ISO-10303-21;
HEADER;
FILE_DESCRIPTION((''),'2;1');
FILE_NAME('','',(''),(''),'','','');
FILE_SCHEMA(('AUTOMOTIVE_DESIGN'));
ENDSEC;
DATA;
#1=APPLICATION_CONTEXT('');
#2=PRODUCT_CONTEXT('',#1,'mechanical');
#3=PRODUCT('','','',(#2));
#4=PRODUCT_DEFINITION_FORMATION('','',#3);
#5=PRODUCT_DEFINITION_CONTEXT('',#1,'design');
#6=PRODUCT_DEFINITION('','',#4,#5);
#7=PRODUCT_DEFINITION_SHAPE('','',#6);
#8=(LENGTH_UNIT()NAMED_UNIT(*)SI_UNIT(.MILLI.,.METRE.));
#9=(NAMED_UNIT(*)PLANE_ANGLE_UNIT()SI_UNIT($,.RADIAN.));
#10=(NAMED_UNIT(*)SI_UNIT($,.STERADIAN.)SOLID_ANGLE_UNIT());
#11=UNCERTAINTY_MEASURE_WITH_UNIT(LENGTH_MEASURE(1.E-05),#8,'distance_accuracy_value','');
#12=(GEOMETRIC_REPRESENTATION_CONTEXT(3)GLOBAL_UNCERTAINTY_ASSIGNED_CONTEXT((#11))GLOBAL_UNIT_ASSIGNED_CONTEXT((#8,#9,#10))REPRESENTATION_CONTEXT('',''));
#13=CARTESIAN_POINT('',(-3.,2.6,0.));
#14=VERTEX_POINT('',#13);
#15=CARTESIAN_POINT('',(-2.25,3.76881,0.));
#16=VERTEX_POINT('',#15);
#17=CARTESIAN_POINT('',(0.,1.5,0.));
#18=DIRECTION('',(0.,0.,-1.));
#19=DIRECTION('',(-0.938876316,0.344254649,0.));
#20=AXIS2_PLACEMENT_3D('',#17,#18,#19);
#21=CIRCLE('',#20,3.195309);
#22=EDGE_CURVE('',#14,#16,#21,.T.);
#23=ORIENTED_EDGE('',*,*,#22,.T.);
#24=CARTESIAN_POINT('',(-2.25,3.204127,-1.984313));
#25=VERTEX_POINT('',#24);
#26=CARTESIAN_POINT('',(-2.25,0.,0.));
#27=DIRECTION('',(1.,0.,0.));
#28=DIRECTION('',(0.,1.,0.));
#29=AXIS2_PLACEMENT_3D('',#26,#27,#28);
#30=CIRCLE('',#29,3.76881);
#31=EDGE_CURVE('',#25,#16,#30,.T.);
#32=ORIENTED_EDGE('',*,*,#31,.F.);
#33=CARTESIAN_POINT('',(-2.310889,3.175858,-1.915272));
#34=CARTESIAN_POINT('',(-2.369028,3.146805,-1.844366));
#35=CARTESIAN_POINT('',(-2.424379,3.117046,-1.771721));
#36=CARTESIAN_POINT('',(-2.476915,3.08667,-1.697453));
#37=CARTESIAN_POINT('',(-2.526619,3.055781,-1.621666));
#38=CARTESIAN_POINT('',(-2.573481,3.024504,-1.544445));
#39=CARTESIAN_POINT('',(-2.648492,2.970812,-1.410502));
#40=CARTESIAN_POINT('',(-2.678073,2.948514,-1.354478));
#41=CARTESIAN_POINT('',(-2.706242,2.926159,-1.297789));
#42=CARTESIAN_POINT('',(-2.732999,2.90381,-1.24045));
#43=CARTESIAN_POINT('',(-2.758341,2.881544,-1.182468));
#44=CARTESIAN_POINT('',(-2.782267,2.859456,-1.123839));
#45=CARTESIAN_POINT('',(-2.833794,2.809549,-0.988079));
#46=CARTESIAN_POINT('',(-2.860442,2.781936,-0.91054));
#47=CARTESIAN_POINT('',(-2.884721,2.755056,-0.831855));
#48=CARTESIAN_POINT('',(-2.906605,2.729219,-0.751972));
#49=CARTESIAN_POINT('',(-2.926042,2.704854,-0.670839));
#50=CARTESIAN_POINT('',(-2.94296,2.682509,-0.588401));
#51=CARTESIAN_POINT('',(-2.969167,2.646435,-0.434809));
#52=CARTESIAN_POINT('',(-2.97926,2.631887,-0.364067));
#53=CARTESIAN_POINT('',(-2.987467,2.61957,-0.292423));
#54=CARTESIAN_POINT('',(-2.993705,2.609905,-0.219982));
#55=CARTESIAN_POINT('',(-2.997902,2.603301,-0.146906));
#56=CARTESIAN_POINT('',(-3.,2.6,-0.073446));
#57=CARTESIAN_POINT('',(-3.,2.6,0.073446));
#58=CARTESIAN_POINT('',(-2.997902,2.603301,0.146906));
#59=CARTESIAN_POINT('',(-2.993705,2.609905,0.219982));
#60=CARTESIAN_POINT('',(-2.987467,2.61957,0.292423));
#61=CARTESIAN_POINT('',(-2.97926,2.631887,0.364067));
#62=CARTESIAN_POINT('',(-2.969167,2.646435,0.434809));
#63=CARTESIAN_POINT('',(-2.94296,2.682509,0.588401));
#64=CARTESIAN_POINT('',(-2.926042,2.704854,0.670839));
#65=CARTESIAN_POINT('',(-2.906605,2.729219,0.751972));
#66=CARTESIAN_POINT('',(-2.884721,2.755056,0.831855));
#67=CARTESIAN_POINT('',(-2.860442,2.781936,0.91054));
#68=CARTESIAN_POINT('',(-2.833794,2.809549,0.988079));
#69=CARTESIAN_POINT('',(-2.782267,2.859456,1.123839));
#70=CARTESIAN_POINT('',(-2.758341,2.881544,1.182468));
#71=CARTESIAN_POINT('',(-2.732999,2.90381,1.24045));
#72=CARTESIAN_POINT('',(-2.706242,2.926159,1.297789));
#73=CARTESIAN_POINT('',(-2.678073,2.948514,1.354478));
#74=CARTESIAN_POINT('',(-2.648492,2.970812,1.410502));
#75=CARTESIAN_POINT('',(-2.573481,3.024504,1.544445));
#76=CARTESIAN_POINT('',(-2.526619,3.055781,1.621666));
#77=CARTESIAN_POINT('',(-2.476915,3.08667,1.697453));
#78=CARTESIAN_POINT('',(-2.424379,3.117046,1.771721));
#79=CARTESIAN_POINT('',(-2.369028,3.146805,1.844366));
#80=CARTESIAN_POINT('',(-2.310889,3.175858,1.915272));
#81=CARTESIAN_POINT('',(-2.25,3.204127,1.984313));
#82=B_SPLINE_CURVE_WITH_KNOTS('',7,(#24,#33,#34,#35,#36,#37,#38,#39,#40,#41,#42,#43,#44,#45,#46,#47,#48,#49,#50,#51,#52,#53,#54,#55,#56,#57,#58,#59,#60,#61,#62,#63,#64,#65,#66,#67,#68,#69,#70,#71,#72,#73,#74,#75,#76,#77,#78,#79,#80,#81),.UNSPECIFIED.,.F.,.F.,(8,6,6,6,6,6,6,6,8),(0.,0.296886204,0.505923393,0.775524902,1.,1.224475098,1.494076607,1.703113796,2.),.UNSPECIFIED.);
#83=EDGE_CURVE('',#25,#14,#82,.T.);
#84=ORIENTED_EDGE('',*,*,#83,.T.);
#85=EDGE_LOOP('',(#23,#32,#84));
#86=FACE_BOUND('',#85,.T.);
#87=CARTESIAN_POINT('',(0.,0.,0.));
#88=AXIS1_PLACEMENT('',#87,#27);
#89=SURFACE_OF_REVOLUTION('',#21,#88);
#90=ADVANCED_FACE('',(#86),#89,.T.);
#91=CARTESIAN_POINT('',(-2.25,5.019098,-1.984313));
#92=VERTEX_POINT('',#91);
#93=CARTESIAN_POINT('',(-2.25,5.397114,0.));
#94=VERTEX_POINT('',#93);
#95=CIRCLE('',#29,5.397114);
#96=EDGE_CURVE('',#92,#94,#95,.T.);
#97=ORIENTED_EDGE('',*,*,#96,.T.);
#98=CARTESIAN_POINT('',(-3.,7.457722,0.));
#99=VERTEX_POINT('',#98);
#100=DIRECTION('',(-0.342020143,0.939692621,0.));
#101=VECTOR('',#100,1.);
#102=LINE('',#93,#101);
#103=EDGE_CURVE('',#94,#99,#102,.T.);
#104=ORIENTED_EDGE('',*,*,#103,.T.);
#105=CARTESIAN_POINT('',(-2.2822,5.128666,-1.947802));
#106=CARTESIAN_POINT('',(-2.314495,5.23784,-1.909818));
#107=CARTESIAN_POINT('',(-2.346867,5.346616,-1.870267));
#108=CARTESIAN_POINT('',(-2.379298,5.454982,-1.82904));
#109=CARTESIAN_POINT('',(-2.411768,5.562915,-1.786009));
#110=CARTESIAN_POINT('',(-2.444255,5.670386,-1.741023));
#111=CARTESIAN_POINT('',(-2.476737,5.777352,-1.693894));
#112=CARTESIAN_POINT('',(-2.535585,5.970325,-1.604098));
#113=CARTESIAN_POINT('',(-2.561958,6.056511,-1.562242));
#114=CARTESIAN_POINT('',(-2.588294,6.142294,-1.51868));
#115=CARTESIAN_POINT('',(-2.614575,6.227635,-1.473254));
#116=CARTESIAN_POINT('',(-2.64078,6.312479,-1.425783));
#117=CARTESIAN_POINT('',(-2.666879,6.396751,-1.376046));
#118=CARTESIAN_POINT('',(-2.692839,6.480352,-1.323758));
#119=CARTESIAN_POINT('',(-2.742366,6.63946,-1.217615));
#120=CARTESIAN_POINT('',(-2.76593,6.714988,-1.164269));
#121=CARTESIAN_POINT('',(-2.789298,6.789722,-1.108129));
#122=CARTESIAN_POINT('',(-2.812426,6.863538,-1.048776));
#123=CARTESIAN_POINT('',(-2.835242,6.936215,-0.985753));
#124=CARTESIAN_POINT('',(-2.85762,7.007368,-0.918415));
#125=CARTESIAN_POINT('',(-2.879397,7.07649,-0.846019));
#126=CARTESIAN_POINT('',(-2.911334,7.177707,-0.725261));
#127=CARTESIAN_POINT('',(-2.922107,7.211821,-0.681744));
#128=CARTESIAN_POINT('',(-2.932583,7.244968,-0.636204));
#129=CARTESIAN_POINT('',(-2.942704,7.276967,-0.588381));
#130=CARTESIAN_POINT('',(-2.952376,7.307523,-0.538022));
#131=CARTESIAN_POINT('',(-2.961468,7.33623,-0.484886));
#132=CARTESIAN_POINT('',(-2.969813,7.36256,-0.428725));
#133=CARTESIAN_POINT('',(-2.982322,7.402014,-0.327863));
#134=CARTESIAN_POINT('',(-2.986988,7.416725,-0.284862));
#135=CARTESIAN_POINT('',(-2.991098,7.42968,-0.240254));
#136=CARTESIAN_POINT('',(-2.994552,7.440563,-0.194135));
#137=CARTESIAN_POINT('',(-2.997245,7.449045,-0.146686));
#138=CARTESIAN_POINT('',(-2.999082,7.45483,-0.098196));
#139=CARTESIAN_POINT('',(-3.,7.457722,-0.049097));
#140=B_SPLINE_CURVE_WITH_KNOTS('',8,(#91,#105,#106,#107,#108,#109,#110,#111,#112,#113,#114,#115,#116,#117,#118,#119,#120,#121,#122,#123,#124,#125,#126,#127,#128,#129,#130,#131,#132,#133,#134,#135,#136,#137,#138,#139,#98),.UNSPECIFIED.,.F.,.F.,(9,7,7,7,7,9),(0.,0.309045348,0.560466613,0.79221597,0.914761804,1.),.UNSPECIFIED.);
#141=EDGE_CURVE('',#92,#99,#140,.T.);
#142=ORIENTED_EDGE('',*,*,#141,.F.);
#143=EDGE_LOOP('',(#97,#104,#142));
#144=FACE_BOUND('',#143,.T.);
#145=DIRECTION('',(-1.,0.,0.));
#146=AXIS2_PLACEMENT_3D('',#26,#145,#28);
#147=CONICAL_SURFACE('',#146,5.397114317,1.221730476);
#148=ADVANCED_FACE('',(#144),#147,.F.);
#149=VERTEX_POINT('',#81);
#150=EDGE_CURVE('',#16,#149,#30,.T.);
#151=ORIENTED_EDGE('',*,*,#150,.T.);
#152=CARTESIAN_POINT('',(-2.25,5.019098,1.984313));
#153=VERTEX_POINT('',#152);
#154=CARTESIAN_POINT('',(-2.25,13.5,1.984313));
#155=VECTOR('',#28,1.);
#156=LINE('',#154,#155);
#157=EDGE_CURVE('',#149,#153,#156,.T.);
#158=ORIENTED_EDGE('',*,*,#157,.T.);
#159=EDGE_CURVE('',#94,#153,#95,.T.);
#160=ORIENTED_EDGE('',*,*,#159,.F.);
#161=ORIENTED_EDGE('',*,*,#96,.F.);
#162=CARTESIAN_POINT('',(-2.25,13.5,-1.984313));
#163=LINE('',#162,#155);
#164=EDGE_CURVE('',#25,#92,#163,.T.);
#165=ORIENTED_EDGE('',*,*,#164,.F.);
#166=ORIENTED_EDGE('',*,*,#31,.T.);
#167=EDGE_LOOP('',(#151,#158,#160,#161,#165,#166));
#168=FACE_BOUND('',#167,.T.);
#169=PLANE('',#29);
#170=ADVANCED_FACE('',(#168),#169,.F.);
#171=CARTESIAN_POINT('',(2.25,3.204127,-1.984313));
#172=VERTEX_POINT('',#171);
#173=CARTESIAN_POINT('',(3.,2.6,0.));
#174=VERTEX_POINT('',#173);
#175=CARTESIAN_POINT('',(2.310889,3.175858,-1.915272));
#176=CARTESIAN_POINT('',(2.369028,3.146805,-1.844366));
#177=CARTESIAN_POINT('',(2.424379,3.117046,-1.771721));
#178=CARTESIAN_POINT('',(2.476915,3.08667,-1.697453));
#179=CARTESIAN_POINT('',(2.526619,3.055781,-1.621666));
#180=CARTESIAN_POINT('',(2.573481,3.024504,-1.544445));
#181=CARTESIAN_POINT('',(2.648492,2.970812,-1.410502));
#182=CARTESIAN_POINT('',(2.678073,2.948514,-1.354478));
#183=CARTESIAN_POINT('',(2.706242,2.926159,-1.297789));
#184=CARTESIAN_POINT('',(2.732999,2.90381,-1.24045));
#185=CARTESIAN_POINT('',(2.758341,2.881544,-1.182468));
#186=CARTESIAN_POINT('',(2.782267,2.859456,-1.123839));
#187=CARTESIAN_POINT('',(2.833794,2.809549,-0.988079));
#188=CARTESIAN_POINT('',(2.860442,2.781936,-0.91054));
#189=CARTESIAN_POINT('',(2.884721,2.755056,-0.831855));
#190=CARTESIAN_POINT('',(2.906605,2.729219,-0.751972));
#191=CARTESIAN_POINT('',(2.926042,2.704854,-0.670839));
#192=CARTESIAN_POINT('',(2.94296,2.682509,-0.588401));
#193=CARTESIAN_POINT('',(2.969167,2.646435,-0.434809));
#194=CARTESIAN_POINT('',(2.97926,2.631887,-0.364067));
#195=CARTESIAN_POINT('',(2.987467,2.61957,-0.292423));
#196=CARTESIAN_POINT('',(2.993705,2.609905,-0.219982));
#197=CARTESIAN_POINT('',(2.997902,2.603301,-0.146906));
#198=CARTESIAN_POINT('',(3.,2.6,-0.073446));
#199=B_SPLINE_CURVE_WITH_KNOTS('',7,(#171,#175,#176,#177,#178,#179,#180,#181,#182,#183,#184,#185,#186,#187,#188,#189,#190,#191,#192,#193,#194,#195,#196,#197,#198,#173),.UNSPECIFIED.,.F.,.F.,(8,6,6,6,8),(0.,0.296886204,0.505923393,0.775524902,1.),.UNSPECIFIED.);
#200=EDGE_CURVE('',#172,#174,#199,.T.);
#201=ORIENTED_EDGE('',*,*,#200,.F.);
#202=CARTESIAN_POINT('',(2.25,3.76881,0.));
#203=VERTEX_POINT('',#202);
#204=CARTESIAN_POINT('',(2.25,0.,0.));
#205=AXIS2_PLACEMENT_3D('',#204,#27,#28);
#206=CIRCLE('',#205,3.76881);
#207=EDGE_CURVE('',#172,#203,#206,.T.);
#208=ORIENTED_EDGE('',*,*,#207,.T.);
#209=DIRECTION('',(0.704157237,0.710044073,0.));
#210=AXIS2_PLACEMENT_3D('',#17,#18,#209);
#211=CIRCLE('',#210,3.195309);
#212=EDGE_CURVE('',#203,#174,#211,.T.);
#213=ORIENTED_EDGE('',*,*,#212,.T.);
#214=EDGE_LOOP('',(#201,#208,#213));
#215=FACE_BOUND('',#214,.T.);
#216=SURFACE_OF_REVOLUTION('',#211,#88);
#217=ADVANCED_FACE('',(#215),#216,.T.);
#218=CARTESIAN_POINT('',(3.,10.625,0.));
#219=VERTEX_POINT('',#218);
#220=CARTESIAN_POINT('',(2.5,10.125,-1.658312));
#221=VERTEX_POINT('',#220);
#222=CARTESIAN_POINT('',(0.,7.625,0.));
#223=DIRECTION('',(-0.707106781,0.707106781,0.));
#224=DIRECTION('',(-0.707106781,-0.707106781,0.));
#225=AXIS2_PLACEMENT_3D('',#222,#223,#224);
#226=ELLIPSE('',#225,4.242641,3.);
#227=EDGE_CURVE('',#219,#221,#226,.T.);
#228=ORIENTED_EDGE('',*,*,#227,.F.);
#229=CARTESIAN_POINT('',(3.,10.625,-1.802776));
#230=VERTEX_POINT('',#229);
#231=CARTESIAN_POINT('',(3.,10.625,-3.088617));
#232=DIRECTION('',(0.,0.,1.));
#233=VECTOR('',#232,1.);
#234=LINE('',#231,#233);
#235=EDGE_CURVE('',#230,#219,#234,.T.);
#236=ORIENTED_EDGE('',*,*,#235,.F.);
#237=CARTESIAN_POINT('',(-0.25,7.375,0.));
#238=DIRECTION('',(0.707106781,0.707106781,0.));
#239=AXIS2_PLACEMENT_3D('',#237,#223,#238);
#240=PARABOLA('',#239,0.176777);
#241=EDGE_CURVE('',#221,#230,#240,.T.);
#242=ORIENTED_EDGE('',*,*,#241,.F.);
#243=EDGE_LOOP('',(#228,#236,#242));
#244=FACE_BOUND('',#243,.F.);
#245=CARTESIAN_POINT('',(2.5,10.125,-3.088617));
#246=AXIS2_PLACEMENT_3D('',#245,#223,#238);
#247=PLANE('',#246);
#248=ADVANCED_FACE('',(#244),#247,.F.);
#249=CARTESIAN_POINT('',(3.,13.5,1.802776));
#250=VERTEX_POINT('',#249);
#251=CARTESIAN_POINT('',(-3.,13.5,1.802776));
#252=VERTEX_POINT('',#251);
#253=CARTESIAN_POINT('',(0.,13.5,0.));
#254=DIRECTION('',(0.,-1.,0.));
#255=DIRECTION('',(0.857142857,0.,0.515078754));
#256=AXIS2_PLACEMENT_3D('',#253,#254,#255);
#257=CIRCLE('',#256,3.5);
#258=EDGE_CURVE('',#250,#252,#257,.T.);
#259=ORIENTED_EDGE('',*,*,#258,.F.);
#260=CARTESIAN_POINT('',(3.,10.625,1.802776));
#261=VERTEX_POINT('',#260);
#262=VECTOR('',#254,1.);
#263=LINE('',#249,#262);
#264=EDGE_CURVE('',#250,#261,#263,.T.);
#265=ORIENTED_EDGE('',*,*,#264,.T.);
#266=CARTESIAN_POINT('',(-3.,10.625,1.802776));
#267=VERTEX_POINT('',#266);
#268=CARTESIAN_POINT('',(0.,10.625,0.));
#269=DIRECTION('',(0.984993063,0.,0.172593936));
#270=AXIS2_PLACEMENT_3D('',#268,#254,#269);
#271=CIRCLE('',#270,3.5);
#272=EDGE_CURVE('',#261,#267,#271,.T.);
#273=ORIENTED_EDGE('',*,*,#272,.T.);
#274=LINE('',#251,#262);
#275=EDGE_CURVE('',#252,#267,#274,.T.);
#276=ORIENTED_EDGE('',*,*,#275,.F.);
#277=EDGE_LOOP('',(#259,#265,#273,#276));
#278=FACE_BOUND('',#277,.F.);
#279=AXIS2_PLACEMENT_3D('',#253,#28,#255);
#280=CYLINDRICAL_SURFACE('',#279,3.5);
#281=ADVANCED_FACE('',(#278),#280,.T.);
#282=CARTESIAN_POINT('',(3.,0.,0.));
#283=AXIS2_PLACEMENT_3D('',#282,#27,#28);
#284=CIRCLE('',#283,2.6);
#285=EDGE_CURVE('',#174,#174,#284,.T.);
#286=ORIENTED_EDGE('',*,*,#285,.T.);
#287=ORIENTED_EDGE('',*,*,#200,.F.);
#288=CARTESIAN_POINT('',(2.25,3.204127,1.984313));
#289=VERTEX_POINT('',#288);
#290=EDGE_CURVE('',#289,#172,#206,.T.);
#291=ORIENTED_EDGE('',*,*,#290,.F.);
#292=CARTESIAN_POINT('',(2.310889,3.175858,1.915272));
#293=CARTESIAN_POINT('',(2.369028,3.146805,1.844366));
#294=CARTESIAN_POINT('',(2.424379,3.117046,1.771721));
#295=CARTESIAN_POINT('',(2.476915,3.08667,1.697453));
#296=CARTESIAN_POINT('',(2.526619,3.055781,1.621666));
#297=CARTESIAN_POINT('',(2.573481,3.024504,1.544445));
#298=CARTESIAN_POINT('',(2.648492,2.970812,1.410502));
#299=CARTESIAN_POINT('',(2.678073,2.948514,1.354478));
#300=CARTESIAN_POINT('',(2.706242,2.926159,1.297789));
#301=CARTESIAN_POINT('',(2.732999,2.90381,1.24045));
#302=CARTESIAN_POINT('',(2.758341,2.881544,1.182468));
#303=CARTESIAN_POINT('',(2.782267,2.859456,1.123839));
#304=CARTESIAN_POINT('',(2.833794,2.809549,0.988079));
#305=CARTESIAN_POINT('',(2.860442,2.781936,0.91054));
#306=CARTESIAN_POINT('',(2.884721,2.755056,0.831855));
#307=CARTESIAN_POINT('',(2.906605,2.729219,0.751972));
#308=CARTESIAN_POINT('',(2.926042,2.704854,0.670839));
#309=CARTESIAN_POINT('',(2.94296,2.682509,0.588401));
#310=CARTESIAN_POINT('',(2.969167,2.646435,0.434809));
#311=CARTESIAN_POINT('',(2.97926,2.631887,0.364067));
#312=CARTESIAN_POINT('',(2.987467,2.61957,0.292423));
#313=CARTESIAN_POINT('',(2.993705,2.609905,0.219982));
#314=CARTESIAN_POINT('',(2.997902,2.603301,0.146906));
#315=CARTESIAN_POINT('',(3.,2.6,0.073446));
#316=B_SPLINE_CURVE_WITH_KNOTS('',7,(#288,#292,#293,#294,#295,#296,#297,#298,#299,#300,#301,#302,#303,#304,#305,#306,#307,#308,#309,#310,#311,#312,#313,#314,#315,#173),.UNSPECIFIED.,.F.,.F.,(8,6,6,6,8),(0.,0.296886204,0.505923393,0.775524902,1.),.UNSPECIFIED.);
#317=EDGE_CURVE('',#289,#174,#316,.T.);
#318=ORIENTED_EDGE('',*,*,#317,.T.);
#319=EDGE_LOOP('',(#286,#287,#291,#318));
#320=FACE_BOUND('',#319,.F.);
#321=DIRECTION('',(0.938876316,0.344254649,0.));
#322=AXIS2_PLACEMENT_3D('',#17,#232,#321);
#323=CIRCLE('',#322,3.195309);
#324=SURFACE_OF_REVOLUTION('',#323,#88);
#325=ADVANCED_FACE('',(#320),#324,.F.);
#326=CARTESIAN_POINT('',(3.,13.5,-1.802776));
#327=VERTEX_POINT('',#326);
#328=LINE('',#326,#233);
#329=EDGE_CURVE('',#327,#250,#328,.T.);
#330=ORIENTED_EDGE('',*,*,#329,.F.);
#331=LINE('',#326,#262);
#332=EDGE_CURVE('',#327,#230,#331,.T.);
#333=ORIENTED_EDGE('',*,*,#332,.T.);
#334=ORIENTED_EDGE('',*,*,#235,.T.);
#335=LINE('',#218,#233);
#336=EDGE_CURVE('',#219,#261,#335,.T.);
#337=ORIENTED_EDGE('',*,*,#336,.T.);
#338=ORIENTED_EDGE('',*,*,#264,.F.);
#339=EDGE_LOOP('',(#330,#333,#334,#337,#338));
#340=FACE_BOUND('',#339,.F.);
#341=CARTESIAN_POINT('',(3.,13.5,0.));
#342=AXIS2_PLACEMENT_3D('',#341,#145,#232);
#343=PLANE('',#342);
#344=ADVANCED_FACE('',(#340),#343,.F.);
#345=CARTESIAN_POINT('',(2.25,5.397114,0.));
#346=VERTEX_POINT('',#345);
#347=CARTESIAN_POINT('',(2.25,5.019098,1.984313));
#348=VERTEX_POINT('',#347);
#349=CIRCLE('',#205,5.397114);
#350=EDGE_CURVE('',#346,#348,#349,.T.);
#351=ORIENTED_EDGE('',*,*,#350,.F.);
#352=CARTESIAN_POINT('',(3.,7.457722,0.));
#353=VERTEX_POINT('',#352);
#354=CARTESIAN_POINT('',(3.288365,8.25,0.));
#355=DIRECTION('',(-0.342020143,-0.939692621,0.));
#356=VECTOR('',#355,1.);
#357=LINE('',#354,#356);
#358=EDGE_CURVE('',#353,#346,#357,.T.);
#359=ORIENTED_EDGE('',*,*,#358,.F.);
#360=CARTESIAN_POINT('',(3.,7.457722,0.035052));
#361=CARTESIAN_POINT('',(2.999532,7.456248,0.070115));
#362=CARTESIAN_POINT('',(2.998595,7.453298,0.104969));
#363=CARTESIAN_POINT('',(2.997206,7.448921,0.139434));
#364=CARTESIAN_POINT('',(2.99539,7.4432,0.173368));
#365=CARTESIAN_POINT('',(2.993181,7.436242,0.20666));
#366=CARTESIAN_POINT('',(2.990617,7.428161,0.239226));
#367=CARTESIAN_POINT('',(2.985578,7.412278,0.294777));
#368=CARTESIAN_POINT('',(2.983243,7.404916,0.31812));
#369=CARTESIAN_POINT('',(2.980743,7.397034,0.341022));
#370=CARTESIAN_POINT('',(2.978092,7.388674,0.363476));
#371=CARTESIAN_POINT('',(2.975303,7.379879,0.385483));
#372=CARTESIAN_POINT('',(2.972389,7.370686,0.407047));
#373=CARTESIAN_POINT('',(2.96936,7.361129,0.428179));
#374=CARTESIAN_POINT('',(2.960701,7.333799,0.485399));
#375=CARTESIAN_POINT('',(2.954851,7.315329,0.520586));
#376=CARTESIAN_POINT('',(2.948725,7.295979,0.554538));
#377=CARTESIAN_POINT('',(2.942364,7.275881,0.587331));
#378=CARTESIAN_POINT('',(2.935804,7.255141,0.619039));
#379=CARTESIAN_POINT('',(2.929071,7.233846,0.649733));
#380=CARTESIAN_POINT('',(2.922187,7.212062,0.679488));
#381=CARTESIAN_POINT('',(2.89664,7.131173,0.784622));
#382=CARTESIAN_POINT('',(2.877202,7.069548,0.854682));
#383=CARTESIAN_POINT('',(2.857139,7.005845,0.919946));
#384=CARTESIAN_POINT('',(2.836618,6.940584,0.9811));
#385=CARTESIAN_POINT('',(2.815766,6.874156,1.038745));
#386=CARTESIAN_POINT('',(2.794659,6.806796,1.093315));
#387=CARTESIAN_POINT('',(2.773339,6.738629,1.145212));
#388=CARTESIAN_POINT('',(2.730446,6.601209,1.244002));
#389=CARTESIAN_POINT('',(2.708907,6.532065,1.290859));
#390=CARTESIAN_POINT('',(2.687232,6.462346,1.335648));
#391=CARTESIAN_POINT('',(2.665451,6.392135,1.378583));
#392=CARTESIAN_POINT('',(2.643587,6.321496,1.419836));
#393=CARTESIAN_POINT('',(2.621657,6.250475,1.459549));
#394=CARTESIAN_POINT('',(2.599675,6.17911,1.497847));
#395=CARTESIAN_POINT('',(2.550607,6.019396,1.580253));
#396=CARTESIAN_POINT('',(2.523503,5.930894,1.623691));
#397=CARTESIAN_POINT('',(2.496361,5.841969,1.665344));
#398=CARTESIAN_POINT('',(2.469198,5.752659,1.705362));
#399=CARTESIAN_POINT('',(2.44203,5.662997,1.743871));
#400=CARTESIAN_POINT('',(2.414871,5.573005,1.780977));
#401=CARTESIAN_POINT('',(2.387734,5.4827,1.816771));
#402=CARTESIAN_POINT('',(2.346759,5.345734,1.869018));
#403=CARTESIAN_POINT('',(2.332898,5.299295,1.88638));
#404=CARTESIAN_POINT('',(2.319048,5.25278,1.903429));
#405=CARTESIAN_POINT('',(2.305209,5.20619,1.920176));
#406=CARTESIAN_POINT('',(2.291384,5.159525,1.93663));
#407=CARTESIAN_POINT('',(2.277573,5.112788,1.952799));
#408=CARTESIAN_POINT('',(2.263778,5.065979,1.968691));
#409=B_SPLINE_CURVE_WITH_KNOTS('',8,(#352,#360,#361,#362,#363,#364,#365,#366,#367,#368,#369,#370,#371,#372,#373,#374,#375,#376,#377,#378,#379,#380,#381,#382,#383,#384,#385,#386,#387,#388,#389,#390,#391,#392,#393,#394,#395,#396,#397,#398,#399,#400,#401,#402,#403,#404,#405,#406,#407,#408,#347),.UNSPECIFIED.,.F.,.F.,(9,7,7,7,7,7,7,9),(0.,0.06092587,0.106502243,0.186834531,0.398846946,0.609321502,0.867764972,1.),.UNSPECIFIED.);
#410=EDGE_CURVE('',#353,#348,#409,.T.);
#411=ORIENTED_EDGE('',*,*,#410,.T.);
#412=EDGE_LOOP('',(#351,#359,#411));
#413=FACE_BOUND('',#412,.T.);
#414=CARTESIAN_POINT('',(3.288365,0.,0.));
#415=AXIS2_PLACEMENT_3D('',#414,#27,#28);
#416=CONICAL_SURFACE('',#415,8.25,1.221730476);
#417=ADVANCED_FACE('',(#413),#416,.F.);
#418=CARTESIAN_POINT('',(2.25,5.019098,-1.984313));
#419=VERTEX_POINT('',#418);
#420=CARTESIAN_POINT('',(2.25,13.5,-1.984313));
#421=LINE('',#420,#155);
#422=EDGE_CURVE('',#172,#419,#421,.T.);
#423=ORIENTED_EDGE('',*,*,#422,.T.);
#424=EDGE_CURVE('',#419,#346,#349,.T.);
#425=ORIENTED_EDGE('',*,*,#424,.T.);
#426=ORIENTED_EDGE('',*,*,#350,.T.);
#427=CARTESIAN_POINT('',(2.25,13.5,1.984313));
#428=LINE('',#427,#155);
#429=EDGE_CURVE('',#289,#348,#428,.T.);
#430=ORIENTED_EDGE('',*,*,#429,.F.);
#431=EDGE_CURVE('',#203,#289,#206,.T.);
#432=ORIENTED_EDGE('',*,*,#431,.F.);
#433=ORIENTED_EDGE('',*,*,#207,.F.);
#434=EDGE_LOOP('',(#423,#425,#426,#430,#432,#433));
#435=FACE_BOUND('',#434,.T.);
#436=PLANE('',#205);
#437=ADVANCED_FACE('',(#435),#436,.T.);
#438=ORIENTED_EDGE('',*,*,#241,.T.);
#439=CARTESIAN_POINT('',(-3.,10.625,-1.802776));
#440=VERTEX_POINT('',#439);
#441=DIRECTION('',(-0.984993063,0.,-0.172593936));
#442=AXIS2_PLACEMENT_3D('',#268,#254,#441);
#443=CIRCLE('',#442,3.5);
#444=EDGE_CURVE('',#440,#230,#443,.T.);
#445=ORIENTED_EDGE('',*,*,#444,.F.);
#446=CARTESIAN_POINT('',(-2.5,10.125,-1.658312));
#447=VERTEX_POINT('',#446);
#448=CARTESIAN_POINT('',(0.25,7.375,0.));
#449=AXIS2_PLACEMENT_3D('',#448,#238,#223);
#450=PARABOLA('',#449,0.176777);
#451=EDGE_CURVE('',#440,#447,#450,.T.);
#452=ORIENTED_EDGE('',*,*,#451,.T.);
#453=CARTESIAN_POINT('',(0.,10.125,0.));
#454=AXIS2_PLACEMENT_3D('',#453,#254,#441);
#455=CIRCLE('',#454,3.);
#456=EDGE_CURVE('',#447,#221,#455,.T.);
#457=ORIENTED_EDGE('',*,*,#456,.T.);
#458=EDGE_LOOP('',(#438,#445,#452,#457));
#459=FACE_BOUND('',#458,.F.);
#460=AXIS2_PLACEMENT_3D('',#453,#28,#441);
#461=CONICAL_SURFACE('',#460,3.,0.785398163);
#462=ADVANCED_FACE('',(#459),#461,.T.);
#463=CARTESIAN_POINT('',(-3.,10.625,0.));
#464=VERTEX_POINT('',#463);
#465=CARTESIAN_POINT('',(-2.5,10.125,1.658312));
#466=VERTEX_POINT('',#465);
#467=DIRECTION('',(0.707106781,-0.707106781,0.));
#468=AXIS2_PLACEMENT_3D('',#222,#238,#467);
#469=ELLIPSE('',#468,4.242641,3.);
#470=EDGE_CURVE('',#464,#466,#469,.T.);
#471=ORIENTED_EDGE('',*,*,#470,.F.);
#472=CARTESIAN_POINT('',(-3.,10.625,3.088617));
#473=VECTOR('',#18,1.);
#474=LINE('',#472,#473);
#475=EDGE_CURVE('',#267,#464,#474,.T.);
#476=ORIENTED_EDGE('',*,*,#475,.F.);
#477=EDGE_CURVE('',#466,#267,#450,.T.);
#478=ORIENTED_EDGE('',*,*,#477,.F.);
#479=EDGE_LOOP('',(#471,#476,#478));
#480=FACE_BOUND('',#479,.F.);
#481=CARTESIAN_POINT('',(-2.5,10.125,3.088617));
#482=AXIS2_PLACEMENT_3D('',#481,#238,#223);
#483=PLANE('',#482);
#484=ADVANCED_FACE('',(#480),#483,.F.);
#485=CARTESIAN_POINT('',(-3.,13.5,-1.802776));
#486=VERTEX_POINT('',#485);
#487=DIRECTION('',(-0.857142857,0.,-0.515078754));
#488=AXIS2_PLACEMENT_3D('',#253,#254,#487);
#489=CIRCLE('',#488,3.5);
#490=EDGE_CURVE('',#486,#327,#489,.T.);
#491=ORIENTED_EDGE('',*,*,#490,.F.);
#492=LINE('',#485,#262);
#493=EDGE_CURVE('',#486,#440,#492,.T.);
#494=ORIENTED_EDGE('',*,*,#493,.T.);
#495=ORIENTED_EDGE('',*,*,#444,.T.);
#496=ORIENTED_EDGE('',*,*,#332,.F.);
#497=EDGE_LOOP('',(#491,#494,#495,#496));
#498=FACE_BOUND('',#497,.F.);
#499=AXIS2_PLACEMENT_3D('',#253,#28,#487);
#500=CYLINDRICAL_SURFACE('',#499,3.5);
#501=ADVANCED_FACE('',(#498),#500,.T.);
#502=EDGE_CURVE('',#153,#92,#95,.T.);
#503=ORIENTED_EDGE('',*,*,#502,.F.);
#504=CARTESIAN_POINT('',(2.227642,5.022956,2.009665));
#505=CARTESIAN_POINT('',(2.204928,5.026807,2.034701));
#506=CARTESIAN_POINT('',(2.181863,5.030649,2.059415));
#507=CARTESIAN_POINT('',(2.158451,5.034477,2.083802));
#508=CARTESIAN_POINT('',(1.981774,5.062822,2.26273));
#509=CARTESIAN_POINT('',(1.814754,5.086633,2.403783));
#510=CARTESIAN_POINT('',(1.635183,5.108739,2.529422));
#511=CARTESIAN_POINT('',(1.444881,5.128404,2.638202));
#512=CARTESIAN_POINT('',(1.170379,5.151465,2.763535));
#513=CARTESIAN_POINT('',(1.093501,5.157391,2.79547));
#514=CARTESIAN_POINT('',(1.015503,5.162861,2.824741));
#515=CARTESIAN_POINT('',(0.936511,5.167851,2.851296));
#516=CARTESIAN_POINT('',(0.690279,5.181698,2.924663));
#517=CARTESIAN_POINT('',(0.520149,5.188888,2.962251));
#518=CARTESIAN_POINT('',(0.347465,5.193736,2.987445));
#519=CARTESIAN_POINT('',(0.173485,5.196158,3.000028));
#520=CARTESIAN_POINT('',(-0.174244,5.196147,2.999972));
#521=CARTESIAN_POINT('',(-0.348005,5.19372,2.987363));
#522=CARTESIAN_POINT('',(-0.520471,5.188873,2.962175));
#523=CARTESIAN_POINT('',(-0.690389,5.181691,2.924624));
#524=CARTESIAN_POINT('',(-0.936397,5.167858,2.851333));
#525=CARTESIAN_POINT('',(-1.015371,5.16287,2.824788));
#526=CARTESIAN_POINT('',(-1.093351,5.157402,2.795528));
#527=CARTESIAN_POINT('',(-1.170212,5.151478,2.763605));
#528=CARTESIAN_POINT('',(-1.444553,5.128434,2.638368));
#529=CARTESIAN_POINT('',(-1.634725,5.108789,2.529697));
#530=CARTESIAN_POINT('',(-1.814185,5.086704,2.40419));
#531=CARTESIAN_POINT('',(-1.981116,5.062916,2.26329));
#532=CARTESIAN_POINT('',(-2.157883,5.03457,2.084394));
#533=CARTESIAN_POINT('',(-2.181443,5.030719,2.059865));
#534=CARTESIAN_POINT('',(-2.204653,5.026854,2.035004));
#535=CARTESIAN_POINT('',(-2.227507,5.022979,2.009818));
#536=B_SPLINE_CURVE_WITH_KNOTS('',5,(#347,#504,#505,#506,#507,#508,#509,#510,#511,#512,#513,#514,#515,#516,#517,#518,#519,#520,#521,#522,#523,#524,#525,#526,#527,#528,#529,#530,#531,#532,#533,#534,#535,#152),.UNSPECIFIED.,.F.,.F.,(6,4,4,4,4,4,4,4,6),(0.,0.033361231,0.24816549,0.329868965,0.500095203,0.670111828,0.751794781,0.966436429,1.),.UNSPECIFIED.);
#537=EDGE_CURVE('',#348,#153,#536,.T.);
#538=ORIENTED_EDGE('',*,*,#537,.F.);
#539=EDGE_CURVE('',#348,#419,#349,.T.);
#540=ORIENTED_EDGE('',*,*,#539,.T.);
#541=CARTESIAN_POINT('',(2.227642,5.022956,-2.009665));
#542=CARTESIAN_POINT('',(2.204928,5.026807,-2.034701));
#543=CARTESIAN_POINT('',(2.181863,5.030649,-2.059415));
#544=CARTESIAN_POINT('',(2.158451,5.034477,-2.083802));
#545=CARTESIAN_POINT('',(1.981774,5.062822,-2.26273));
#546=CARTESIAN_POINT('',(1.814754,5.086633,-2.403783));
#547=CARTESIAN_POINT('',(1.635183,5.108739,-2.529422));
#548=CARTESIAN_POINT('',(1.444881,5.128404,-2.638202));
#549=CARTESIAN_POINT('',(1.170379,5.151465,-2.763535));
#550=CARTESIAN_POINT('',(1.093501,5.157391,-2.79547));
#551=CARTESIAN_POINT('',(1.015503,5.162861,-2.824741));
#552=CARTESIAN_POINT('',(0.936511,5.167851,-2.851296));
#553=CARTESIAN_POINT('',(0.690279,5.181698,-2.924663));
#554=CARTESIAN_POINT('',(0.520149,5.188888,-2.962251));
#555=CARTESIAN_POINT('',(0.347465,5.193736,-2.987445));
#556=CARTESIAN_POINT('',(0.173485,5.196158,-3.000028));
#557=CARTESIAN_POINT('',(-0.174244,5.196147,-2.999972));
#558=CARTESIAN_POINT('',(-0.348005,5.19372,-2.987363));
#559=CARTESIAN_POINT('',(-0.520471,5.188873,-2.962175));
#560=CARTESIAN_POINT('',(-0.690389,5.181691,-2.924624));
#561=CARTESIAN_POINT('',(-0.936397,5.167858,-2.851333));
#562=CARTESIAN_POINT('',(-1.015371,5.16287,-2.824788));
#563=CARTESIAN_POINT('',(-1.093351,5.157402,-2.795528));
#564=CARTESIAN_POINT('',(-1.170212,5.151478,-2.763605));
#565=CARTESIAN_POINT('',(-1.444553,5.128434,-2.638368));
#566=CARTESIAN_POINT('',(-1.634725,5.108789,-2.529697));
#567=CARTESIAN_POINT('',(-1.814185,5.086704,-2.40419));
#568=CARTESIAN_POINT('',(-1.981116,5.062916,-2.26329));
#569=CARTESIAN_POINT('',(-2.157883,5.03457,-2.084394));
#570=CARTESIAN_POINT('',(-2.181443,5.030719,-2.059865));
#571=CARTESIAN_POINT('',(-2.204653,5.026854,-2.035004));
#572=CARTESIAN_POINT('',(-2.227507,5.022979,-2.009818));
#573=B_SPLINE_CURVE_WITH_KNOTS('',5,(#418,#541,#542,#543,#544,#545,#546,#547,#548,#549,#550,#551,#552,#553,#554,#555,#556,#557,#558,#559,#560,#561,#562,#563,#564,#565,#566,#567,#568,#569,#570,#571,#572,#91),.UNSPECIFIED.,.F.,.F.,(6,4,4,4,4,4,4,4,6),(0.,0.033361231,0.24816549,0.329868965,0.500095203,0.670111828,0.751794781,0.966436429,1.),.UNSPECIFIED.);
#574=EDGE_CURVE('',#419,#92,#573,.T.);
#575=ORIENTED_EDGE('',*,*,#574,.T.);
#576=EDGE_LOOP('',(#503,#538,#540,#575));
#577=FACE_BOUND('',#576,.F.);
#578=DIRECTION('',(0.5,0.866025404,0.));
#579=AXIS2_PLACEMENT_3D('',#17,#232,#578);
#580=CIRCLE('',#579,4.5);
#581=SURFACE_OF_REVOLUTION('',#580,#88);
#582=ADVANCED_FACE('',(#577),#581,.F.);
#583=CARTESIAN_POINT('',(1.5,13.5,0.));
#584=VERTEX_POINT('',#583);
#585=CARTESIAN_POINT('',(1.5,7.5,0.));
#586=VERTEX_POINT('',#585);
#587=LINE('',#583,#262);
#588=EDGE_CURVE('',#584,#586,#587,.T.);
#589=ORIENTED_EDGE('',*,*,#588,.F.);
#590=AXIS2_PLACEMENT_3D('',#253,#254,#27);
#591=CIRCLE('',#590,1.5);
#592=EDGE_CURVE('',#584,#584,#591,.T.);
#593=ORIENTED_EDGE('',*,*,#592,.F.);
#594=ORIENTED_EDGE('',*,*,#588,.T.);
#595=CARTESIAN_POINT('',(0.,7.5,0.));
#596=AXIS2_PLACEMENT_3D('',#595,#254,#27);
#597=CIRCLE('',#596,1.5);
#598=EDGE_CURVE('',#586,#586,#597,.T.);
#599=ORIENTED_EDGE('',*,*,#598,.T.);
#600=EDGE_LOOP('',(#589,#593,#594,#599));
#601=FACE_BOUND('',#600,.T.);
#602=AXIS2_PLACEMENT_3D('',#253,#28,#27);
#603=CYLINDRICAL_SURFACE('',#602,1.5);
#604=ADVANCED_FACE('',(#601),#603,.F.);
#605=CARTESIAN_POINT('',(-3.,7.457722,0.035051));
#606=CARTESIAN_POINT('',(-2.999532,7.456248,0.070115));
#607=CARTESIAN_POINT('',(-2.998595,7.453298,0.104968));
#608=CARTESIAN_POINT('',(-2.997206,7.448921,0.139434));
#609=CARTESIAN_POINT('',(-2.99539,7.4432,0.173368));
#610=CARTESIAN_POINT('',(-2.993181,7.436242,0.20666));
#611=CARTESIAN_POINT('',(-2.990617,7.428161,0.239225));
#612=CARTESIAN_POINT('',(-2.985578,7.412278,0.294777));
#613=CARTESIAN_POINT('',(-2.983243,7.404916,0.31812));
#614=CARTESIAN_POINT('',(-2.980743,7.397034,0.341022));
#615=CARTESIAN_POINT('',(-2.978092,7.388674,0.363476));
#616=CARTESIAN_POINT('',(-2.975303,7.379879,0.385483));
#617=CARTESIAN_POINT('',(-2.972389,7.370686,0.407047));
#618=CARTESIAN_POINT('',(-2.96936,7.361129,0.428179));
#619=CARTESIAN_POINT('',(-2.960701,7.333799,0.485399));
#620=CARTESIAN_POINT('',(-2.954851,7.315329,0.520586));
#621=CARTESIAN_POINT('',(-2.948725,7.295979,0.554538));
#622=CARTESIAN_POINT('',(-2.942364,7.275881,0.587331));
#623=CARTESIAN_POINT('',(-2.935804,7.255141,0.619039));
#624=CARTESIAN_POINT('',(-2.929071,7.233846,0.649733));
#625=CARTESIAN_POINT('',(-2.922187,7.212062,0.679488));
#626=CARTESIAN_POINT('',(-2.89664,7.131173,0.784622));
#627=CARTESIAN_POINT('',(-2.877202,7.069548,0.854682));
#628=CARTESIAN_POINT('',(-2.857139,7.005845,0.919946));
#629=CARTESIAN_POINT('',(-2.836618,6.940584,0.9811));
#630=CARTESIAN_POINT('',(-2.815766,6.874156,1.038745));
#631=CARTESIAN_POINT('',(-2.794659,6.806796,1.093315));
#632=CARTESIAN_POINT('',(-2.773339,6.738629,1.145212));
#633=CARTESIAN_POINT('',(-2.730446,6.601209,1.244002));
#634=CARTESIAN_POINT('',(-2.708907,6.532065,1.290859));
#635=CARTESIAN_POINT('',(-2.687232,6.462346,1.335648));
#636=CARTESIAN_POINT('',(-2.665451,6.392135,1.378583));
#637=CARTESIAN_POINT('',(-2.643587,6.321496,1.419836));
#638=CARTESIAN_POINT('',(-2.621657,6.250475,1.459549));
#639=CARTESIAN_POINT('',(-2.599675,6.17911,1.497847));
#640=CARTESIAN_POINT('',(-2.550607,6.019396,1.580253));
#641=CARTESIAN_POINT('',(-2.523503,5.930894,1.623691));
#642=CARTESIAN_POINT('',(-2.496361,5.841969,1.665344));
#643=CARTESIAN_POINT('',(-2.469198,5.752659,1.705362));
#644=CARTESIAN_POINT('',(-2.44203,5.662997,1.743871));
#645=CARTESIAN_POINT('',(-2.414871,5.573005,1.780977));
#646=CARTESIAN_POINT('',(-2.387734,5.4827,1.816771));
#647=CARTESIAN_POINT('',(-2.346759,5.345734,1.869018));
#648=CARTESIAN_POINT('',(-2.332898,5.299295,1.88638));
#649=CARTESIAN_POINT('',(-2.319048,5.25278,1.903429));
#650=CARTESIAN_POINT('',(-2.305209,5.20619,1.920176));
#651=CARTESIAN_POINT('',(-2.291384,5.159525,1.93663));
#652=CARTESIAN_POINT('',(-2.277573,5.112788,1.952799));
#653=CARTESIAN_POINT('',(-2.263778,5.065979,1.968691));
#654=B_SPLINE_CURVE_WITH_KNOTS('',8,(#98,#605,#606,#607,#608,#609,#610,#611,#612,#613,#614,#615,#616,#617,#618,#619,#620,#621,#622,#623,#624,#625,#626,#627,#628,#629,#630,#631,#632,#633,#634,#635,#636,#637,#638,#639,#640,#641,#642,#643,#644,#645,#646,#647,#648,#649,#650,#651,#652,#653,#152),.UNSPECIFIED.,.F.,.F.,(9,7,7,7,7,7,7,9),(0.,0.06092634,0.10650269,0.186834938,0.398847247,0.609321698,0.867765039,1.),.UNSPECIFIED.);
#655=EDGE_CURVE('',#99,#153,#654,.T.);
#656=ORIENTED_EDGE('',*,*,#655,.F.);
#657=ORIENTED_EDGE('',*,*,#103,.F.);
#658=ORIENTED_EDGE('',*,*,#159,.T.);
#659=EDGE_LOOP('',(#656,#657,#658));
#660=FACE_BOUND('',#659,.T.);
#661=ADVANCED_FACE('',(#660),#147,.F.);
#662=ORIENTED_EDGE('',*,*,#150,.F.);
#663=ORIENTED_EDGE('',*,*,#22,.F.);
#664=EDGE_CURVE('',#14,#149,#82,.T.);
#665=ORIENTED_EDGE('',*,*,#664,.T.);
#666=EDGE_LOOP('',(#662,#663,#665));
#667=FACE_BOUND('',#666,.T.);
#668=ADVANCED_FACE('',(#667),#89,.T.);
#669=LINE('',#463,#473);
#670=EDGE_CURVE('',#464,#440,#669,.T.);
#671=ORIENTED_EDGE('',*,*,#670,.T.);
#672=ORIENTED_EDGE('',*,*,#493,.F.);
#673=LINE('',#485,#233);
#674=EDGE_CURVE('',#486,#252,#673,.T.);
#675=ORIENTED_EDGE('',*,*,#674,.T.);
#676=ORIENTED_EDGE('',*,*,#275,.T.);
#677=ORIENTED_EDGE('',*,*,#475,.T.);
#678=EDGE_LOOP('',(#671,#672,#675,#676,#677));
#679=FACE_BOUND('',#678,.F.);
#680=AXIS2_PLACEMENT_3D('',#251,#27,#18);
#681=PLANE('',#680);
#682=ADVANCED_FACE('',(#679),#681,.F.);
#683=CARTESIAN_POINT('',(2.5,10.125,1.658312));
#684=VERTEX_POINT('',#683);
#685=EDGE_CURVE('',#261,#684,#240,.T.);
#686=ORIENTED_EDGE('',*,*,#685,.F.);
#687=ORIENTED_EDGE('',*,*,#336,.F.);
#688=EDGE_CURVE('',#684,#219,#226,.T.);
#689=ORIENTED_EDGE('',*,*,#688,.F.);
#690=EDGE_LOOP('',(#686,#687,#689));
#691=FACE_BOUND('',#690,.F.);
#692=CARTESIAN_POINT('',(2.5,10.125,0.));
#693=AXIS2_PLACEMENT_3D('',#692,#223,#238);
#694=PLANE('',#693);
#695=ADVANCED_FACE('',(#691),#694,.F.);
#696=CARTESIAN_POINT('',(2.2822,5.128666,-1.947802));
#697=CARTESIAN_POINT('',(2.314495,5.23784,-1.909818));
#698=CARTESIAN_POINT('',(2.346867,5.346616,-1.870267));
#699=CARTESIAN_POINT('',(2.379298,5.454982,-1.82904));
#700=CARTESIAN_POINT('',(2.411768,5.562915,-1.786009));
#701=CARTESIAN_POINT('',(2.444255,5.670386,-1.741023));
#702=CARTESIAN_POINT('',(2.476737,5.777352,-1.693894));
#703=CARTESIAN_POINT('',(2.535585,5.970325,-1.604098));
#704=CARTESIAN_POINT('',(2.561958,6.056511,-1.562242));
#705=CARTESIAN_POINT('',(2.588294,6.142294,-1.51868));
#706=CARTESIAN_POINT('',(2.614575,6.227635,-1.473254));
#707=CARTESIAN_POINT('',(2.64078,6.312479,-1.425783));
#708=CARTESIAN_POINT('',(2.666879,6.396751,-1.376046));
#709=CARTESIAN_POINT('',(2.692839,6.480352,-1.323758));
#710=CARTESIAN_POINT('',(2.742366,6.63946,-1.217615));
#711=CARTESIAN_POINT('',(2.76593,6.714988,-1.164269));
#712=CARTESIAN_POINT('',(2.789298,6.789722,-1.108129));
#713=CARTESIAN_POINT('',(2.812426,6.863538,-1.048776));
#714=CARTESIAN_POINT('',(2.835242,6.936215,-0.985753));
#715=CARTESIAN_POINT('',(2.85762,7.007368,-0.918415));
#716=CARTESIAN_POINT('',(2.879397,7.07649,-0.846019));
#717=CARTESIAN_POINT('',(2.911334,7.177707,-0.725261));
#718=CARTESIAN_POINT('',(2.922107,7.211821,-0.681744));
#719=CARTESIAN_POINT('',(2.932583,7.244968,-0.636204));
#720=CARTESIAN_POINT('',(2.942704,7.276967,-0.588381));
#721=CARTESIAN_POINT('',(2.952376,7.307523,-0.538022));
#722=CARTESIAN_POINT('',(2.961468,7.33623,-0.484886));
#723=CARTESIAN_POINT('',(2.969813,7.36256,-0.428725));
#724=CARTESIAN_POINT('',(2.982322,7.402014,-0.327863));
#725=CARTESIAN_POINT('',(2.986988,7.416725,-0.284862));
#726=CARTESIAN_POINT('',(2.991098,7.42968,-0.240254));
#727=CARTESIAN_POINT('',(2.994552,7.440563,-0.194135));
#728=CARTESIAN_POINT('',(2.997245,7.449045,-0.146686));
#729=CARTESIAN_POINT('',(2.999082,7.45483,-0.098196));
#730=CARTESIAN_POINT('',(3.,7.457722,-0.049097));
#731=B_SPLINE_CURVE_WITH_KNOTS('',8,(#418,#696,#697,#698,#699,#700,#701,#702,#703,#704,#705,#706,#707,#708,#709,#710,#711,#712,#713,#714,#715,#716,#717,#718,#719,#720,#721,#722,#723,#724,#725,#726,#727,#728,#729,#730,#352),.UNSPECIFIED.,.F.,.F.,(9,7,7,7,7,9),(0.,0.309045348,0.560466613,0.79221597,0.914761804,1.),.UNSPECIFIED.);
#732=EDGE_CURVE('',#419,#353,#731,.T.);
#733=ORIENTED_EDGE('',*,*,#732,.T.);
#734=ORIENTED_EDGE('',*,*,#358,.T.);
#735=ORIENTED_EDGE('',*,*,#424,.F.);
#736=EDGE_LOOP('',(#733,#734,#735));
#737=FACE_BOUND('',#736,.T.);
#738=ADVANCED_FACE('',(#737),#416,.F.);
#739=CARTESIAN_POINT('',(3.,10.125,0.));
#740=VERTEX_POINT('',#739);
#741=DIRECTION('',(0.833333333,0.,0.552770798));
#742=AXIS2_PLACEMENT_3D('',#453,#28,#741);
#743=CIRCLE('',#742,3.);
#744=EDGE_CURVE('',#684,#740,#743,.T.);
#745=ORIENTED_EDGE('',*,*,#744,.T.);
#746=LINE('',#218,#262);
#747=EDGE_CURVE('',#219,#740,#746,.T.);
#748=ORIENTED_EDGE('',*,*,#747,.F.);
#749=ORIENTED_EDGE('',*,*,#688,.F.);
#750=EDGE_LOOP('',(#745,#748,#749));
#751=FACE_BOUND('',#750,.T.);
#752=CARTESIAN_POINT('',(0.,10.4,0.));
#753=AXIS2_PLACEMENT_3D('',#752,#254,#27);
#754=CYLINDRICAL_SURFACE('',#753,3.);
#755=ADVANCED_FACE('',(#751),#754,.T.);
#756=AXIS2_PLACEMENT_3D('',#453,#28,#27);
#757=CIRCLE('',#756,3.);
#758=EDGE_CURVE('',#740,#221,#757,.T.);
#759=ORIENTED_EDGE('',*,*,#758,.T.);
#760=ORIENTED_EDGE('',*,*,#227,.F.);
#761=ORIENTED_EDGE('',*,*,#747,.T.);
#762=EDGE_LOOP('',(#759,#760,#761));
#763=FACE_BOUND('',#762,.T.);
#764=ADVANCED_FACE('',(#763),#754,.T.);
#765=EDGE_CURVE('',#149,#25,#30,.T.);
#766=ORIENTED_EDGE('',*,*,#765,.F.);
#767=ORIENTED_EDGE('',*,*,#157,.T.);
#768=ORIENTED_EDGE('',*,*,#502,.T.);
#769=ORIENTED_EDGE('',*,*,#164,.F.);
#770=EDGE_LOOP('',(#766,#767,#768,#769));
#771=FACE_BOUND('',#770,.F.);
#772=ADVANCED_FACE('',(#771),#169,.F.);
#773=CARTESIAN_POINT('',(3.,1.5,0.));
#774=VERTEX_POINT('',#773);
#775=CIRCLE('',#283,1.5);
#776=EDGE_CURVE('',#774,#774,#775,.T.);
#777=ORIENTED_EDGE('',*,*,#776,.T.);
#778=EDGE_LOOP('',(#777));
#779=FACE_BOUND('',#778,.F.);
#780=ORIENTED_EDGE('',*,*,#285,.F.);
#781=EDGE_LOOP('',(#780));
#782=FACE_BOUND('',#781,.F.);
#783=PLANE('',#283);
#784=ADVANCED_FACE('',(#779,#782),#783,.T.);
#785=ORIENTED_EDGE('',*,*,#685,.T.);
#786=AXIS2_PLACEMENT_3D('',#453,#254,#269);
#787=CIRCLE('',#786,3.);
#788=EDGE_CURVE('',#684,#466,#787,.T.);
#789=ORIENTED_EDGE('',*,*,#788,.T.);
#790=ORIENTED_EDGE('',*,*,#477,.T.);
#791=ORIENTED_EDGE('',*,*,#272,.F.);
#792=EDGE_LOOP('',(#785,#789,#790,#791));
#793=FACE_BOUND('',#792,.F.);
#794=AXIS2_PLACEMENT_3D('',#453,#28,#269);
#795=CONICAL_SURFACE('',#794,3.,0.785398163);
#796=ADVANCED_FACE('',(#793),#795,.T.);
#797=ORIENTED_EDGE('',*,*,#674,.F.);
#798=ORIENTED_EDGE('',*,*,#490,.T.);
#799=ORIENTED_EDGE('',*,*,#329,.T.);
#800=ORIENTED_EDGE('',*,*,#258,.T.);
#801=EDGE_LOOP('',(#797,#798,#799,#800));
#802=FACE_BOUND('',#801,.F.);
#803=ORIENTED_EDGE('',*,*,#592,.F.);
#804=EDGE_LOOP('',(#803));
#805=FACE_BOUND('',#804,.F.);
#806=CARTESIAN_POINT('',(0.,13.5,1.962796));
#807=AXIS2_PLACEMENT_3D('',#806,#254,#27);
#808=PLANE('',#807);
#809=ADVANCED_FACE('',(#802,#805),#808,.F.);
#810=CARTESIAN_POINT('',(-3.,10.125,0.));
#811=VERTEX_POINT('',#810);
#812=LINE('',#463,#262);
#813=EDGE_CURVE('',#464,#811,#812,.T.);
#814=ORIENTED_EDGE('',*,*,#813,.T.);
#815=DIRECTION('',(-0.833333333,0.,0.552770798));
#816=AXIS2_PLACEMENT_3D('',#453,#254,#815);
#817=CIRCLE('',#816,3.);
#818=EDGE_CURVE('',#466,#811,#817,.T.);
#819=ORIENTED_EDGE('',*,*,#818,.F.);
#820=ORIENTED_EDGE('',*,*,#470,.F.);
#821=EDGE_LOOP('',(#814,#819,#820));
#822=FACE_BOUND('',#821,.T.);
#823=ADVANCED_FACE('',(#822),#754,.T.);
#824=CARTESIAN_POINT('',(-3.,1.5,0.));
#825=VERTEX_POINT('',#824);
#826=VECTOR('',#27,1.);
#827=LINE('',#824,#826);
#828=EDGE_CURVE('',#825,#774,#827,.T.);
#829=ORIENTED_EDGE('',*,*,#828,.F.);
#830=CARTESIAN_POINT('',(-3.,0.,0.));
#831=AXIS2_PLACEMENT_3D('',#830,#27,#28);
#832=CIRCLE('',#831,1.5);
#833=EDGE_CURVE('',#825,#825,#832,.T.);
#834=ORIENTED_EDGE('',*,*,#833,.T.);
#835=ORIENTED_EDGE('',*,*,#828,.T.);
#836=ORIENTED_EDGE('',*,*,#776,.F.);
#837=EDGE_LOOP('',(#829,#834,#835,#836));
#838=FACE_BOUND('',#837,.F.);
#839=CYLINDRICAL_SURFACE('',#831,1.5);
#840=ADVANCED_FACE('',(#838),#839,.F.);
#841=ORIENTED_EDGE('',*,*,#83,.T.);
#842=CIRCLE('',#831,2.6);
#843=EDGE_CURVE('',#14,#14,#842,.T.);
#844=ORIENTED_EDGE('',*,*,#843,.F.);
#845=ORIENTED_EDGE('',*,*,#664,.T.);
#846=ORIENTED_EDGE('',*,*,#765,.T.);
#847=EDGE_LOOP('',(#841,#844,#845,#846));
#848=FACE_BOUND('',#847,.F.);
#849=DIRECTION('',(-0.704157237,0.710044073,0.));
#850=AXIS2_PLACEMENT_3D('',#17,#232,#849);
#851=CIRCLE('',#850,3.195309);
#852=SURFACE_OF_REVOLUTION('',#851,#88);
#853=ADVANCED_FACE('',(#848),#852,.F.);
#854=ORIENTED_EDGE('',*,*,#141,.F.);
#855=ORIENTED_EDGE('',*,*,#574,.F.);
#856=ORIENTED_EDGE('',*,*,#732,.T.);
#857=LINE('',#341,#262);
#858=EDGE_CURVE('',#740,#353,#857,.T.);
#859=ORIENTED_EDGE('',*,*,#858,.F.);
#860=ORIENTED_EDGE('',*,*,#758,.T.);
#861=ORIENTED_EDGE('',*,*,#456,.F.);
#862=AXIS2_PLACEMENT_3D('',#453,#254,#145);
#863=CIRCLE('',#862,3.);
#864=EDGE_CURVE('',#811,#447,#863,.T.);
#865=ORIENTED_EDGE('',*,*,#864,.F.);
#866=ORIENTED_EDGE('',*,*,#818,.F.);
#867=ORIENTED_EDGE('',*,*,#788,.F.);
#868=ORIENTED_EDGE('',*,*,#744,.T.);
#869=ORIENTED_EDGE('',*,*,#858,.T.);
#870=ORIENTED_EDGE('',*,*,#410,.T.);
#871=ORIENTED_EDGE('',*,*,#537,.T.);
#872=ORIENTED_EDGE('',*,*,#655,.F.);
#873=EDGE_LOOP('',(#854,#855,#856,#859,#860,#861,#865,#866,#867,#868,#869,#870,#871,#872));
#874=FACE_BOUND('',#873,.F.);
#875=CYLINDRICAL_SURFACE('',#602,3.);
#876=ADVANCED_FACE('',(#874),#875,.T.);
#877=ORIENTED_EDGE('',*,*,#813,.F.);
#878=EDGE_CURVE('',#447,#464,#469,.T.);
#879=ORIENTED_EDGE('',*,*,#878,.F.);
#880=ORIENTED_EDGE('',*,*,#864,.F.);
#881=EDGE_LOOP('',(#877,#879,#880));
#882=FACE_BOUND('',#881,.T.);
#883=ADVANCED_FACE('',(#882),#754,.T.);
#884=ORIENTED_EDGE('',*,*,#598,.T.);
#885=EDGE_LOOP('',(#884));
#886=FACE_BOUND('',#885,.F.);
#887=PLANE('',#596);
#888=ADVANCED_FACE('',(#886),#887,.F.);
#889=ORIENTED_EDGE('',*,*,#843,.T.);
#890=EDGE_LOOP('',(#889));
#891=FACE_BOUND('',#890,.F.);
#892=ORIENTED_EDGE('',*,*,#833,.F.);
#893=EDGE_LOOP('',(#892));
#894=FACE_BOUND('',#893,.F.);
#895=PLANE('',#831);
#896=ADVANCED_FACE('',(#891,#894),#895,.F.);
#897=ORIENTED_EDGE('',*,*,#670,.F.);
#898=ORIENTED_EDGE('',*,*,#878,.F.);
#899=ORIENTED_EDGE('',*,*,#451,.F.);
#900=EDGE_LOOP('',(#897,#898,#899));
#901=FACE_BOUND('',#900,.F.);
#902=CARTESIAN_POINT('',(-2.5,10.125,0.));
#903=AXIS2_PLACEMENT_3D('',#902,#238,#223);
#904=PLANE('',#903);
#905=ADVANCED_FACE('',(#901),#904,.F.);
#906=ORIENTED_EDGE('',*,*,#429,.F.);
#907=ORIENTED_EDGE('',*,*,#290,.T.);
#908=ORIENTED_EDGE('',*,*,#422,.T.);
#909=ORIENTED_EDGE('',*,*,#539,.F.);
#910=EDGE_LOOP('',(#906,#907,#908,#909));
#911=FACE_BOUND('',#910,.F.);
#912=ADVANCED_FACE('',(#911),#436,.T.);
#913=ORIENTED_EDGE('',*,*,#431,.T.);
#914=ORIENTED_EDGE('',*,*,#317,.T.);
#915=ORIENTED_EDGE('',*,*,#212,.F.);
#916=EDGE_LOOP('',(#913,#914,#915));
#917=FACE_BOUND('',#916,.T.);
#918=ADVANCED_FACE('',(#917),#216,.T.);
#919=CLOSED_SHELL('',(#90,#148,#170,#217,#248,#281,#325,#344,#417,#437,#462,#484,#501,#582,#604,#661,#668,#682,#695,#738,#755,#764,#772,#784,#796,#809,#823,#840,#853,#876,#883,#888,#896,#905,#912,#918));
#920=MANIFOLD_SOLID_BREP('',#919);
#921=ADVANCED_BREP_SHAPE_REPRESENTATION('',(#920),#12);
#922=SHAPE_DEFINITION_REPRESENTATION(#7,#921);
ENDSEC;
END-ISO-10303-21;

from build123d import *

# Parameters (mm, degrees)
F8_R          = 1.5
F10_DEPTH     = 3.375
F11_DEPTH     = 6
F12_T2_ANGLE  = 160.1226593158
F12_T6_DEPTH  = 3.0886171317
F12_S7_R      = 3
F12_T8_DEPTH  = 3
F12_T12_DEPTH = 3.0886171317
F12_S13_R     = 3
F12_T14_DEPTH = 3
F12_T16_ANGLE = 160.1226593158
F12_T20_DEPTH = 3.0886171317
F12_S21_R     = 3
F12_T22_DEPTH = 3
F12_T26_DEPTH = 3.0886171317
F12_S27_R     = 3
F12_T28_DEPTH = 3


# Not quite as in the source:
# - a fillet or chamfer that OpenCascade refuses, or shapes differently, is made with other operations: its cross-section is extruded or revolved along the edge and cut away or added


with BuildPart() as f6:
    # F5 (on Top) → F6 (revolve)
    with BuildSketch(Plane.XY):
        with BuildLine():
            Line((-3, 2.6), (-3, 1.5))
            Line((-3, 1.5), (3, 1.5))
            Line((3, 1.5), (3, 2.6))
            ThreePointArc((3, 2.6), (2.689266509, 3.2256435447), (2.25, 3.7688102609))
            ThreePointArc((2.25, 3.7688102609), (0, 4.6953090617), (-2.25, 3.7688102609))
            ThreePointArc((-2.25, 3.7688102609), (-2.689266509, 3.2256435447), (-3, 2.6))
        make_face()
        with BuildLine():
            Line((-2.25, 5.397114317), (-2.25, 3.7688102609))
            ThreePointArc((-2.25, 3.7688102609), (0, 4.6953090617), (2.25, 3.7688102609))
            Line((2.25, 3.7688102609), (2.25, 5.397114317))
            ThreePointArc((2.25, 5.397114317), (0, 6), (-2.25, 5.397114317))
        make_face()
    revolve(axis=Axis((0, 0, 0), (1, 0, 0)))

    # F8 (on offset) → F9 (join, up to the next surface of F6)
    with BuildSketch(Plane.XZ.offset(-13.5)):
        with BuildLine():
            ThreePointArc((-3, 0), (0, -3), (3, 0))
            ThreePointArc((3, 0), (0, 3), (-3, 0))
        make_face()
        Circle(F8_R, mode=Mode.SUBTRACT)
        Circle(F8_R)
    extrude(until=Until.NEXT)

    # F8 (on offset) → F10 (join)
    with BuildSketch(Plane.XZ.offset(-13.5)):
        with BuildLine():
            ThreePointArc((-3, 0), (0, 3), (3, 0))
            Line((3, 0), (3, 1.8027756377))
            ThreePointArc((3, 1.8027756377), (0, 3.5), (-3, 1.8027756377))
            Line((-3, 1.8027756377), (-3, 0))
        make_face()
        with BuildLine():
            Line((3, -1.8027756377), (3, 0))
            ThreePointArc((3, 0), (0, -3), (-3, 0))
            Line((-3, 0), (-3, -1.8027756377))
            ThreePointArc((-3, -1.8027756377), (0, -3.5), (3, -1.8027756377))
        make_face()
    extrude(amount=F10_DEPTH)

    # F8 (on offset) → F11 (cut)
    with BuildSketch(Plane.XZ.offset(-13.5)):
        Circle(F8_R)
    extrude(amount=F11_DEPTH, mode=Mode.SUBTRACT)

    # F12: chamfer of 0.5 on 6 edges, made by hand

    # F12_s1 → F12_t2 (revolve, cut)
    with BuildSketch(Plane(origin=(0, 0, 0), x_dir=(0, 1, 0), z_dir=(0.1725939358, 0, -0.9849930626))):
        Polygon((10.125, 3), (10.625, 3.5), (10.125, 3.5), align=None)
    revolve(axis=Axis((0, 10.125, 0), (0, -1, 0)), revolution_arc=F12_T2_ANGLE, mode=Mode.SUBTRACT)


with BuildPart() as f12_tool4:
    # F12_s5 → F12_t6 (new body)
    with BuildSketch(Plane.XY):
        Polygon((2.5, 10.125), (3, 10.625), (3, 10.125), align=None)
    extrude(amount=F12_T6_DEPTH)

    # F12_s7 → F12_t8 (cut, symmetric)
    with BuildSketch(Plane.XZ.offset(-10.4)):
        Circle(F12_S7_R)
    extrude(amount=F12_T8_DEPTH, both=True, mode=Mode.SUBTRACT)


with BuildPart() as f6_1:
    add(f6.part)

    # F12_t3: cut F12_tool4
    add(f12_tool4.part, mode=Mode.SUBTRACT)


with BuildPart() as f12_tool10:
    # F12_s11 → F12_t12 (new body)
    with BuildSketch(Plane.XY.offset(3.0886171317)):
        Polygon((-2.5, 10.125), (-3, 10.625), (-3, 10.125), align=None)
    extrude(amount=-F12_T12_DEPTH)

    # F12_s13 → F12_t14 (cut, symmetric)
    with BuildSketch(Plane.XZ.offset(-10.4)):
        Circle(F12_S13_R)
    extrude(amount=F12_T14_DEPTH, both=True, mode=Mode.SUBTRACT)


with BuildPart() as f6_2:
    add(f6_1.part)

    # F12_t9: cut F12_tool10
    add(f12_tool10.part, mode=Mode.SUBTRACT)

    # F12_s15 → F12_t16 (revolve, cut)
    with BuildSketch(Plane(origin=(0, 0, 0), x_dir=(0, 1, 0), z_dir=(-0.1725939358, 0, 0.9849930626))):
        Polygon((10.125, 3), (10.625, 3.5), (10.125, 3.5), align=None)
    revolve(axis=Axis((0, 10.125, 0), (0, -1, 0)), revolution_arc=F12_T16_ANGLE, mode=Mode.SUBTRACT)


with BuildPart() as f12_tool18:
    # F12_s19 → F12_t20 (new body)
    with BuildSketch(Plane.XY.offset(-3.0886171317)):
        Polygon((2.5, 10.125), (3, 10.625), (3, 10.125), align=None)
    extrude(amount=F12_T20_DEPTH)

    # F12_s21 → F12_t22 (cut, symmetric)
    with BuildSketch(Plane.XZ.offset(-10.4)):
        Circle(F12_S21_R)
    extrude(amount=F12_T22_DEPTH, both=True, mode=Mode.SUBTRACT)


with BuildPart() as f6_3:
    add(f6_2.part)

    # F12_t17: cut F12_tool18
    add(f12_tool18.part, mode=Mode.SUBTRACT)


with BuildPart() as f12_tool24:
    # F12_s25 → F12_t26 (new body)
    with BuildSketch(Plane.XY):
        Polygon((-2.5, 10.125), (-3, 10.625), (-3, 10.125), align=None)
    extrude(amount=-F12_T26_DEPTH)

    # F12_s27 → F12_t28 (cut, symmetric)
    with BuildSketch(Plane.XZ.offset(-10.4)):
        Circle(F12_S27_R)
    extrude(amount=F12_T28_DEPTH, both=True, mode=Mode.SUBTRACT)


with BuildPart() as f6_4:
    add(f6_3.part)

    # F12_t23: cut F12_tool24
    add(f12_tool24.part, mode=Mode.SUBTRACT)

    # F5 (on Top) → F13 (revolve, cut)
    with BuildSketch(Plane.XY):
        with BuildLine():
            Line((3, 2.6), (3, 1.5))
            Line((3, 1.5), (5, 1.5))
            Line((5, 1.5), (5, 8.25))
            Line((5, 8.25), (3.2883654704, 8.25))
            Line((3.2883654704, 8.25), (2.25, 5.397114317))
            Line((2.25, 5.397114317), (2.25, 3.7688102609))
            ThreePointArc((2.25, 3.7688102609), (2.689266509, 3.2256435447), (3, 2.6))
        make_face()
        with BuildLine():
            Line((-5, 1.5), (-3, 1.5))
            Line((-3, 1.5), (-3, 2.6))
            ThreePointArc((-3, 2.6), (-2.689266509, 3.2256435447), (-2.25, 3.7688102609))
            Line((-2.25, 3.7688102609), (-2.25, 5.397114317))
            Line((-2.25, 5.397114317), (-3.2883654704, 8.25))
            Line((-3.2883654704, 8.25), (-5, 8.25))
            Line((-5, 8.25), (-5, 1.5))
        make_face()
    revolve(axis=Axis((0, 0, 0), (1, 0, 0)), mode=Mode.SUBTRACT)


solid = f6_4.part
